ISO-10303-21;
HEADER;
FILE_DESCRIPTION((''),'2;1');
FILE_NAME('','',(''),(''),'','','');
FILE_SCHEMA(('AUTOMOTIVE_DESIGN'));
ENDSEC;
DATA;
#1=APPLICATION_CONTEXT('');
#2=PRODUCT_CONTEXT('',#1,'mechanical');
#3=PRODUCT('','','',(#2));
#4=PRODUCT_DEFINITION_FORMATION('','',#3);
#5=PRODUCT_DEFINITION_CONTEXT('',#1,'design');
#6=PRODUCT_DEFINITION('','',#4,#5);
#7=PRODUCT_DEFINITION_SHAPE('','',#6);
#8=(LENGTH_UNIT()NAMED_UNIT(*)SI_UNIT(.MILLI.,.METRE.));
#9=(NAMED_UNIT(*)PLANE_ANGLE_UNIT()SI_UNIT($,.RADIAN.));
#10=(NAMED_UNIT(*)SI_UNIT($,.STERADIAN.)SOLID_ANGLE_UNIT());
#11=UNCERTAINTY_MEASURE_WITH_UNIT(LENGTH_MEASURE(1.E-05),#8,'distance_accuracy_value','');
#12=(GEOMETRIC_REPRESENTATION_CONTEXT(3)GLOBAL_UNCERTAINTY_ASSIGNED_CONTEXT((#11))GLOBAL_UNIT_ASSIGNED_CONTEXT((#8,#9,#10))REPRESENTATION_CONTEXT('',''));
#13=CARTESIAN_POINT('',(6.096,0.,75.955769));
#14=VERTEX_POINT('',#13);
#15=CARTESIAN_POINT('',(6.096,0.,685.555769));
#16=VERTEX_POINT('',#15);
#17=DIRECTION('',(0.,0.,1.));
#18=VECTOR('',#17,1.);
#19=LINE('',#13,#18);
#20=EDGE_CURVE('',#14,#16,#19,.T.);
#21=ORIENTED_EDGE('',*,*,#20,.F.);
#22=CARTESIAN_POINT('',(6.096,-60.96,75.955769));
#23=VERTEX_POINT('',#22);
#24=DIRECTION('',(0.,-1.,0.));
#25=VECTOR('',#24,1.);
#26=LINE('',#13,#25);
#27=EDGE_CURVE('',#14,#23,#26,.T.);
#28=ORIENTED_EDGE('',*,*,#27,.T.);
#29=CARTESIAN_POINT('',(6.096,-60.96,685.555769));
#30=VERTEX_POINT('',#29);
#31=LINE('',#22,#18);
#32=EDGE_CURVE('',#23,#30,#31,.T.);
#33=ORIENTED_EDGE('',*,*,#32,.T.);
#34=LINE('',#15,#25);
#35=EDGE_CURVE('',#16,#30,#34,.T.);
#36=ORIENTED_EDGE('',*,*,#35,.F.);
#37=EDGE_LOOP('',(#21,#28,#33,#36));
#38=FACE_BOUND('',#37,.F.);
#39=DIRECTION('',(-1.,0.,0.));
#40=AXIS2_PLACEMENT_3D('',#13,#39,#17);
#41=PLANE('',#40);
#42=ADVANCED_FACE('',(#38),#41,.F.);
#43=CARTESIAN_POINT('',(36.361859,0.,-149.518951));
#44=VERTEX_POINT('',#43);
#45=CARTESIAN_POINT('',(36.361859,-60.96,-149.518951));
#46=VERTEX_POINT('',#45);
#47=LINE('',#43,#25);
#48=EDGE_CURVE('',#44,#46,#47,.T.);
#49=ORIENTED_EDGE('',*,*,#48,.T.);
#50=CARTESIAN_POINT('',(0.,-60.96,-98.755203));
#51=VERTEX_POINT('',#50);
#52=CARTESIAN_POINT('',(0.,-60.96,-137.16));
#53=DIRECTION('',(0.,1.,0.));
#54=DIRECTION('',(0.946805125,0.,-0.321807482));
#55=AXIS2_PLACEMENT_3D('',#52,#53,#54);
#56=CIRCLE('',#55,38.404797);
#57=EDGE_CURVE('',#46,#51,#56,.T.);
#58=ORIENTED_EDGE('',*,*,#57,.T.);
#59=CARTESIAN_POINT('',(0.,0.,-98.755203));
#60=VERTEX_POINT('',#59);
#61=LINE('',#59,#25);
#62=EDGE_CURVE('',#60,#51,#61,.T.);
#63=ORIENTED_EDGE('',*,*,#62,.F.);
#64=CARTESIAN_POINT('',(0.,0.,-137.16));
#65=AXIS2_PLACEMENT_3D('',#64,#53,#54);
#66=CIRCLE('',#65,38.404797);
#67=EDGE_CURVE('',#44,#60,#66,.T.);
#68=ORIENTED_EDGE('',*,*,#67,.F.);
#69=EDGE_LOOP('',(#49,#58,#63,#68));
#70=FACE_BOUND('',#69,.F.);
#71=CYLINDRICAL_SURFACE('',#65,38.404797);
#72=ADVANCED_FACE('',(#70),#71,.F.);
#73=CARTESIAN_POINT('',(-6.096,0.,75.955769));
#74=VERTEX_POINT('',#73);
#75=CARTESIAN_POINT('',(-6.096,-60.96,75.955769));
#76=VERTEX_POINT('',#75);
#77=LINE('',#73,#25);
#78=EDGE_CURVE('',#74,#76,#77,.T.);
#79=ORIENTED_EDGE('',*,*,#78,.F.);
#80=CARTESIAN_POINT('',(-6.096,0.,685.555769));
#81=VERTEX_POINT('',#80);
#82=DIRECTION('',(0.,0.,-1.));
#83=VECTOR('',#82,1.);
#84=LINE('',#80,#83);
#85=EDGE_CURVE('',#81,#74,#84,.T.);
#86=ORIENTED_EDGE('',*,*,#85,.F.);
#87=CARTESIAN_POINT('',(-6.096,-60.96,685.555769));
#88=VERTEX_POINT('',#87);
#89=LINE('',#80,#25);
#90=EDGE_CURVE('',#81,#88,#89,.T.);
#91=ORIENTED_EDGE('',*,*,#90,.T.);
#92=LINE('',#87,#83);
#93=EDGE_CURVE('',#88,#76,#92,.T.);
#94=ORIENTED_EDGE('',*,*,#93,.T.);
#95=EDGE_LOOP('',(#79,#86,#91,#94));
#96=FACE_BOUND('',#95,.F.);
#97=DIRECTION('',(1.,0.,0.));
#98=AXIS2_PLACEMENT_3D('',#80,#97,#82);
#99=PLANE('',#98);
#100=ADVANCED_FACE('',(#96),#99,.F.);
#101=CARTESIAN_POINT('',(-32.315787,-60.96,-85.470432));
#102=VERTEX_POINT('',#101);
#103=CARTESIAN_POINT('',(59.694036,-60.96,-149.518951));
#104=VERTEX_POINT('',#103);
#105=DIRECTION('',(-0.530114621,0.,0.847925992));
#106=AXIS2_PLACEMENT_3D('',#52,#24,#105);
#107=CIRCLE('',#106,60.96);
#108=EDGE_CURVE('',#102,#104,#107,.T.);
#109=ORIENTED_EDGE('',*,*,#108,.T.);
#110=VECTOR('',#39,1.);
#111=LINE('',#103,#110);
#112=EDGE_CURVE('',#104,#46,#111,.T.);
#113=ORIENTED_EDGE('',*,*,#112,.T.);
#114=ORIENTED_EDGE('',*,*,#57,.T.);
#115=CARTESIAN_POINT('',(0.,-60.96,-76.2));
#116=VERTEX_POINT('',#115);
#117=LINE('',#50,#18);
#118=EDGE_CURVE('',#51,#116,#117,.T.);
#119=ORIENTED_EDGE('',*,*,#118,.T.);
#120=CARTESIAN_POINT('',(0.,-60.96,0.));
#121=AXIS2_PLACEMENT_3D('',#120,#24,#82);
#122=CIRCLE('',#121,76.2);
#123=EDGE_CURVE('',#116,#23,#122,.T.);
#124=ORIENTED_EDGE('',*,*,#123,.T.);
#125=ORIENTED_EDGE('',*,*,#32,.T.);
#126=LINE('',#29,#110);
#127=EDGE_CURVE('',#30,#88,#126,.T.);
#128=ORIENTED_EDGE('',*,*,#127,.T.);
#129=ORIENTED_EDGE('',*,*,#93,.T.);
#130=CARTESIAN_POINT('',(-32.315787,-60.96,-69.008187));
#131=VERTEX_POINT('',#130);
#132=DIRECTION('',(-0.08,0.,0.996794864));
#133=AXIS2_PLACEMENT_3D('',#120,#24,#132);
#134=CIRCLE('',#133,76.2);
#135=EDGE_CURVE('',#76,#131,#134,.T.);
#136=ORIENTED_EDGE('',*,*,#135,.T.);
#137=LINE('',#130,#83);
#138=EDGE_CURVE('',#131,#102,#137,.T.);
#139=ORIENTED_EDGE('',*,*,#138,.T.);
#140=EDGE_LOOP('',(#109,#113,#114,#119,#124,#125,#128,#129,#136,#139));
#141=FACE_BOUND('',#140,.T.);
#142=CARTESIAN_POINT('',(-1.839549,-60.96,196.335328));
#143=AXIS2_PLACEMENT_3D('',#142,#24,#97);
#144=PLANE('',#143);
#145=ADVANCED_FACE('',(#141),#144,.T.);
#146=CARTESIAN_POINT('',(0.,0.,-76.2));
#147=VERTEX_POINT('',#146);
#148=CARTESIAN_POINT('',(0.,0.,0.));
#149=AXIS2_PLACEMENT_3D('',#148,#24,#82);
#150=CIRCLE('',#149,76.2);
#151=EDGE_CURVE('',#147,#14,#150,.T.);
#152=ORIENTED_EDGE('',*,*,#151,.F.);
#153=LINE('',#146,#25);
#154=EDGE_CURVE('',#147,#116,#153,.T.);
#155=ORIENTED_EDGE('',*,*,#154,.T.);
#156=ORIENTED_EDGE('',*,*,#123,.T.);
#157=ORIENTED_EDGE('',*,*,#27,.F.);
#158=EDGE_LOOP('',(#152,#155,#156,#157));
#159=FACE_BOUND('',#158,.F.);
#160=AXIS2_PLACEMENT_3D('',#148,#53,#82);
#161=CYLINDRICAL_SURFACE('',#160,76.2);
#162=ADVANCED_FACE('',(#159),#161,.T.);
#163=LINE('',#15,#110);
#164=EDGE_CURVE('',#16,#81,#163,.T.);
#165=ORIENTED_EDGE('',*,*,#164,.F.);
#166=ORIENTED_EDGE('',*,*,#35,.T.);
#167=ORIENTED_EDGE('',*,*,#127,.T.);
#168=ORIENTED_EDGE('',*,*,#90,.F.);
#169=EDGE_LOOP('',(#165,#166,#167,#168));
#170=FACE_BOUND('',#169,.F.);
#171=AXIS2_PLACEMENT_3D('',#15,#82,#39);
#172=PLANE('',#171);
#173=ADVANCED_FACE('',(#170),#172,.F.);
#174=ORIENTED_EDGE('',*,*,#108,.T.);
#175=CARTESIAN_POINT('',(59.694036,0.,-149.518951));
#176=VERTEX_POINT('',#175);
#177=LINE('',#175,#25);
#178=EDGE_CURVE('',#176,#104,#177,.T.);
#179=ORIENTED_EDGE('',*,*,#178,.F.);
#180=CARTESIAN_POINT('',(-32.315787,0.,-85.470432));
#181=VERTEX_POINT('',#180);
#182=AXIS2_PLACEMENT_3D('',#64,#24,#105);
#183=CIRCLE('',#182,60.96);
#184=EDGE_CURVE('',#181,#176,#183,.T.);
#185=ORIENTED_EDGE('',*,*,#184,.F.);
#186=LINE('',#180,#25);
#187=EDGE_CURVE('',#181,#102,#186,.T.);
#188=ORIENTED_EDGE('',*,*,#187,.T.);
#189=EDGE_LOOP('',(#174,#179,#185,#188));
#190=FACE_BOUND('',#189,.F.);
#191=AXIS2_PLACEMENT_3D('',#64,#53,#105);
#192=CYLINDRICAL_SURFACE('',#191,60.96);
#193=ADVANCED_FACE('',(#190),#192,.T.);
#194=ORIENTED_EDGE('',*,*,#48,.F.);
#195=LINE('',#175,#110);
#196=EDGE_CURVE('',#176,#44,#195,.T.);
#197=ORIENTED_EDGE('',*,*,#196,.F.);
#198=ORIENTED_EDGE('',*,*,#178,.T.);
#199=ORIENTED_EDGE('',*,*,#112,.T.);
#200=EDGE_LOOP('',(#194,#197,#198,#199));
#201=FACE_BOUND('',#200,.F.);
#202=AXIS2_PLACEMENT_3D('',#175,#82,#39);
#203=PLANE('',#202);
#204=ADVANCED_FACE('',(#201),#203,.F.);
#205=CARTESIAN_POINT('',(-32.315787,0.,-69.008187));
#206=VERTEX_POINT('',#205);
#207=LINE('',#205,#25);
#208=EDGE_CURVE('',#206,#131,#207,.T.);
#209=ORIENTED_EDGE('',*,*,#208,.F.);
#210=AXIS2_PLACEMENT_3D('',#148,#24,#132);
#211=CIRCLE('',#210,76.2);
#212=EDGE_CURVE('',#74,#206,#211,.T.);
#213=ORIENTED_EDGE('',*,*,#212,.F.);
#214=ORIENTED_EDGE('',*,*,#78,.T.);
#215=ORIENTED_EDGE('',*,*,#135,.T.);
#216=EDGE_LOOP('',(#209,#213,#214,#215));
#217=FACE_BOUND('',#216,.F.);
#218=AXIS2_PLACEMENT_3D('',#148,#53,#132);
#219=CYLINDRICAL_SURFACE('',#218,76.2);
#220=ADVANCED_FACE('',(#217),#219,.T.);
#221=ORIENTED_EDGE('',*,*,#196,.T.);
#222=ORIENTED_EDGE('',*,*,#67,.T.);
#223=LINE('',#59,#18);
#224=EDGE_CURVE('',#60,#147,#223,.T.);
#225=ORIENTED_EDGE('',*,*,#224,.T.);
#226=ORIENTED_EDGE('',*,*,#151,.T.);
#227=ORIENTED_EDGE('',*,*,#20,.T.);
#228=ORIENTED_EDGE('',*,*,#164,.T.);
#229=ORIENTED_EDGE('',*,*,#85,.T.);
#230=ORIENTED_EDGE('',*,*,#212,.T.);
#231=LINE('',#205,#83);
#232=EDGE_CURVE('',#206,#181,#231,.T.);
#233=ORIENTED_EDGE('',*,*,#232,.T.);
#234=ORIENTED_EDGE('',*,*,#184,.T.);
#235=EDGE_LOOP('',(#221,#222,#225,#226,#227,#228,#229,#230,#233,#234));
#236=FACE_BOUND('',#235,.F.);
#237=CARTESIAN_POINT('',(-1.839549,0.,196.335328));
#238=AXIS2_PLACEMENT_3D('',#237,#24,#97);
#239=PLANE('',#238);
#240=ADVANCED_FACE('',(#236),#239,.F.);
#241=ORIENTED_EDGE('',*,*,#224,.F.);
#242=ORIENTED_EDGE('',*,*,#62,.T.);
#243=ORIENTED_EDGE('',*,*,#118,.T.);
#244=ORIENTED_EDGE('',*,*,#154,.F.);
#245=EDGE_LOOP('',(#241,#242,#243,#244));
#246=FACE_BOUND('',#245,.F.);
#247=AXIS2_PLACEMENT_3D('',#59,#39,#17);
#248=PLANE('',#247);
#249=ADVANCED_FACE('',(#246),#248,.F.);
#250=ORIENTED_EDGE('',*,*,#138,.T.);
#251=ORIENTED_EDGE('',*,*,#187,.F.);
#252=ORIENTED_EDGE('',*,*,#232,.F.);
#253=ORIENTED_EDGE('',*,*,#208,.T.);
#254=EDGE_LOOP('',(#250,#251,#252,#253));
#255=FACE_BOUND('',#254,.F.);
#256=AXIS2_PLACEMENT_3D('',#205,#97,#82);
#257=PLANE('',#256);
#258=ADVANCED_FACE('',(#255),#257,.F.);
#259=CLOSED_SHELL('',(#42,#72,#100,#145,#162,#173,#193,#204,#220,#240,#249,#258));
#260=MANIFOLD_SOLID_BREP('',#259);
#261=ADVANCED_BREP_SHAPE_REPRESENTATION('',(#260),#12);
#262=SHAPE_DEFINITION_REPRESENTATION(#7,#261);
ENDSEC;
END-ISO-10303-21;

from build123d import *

# Parameters (mm, degrees)
F1_DEPTH = 60.96


# Not quite as in the source:
# - a feature names something its author has since deleted; it is built from what else it names


with BuildPart() as f1:
    # F0 (on Front) → F1 (new body)
    with BuildSketch(Plane.XZ):
        with BuildLine():
            Line((-6.096, 685.5557686025), (-6.096, 75.9557686025))
            ThreePointArc((-6.096, 75.9557686025), (-74.9833545956, 13.5623203614), (-32.3157872997, -69.0081871317))
            Line((-32.3157872997, -69.0081871317), (-32.3157872997, -85.470431505))
            ThreePointArc((-32.3157872997, -85.470431505), (-34.8273647694, -187.19175255), (59.6940359728, -149.5189509783))
            Line((59.6940359728, -149.5189509783), (36.3618585551, -149.5189509783))
            ThreePointArc((36.3618585551, -149.5189509783), (-31.2215584924, -159.5238706884), (0, -98.7552030748))
            Line((0, -98.7552030748), (0, -76.2))
            ThreePointArc((0, -76.2), (76.1389176687, -3.0504452534), (6.096, 75.9557686025))
            Line((6.096, 75.9557686025), (6.096, 685.5557686025))
            Line((6.096, 685.5557686025), (-6.096, 685.5557686025))
        make_face()
    extrude(amount=F1_DEPTH)


solid = f1.part
